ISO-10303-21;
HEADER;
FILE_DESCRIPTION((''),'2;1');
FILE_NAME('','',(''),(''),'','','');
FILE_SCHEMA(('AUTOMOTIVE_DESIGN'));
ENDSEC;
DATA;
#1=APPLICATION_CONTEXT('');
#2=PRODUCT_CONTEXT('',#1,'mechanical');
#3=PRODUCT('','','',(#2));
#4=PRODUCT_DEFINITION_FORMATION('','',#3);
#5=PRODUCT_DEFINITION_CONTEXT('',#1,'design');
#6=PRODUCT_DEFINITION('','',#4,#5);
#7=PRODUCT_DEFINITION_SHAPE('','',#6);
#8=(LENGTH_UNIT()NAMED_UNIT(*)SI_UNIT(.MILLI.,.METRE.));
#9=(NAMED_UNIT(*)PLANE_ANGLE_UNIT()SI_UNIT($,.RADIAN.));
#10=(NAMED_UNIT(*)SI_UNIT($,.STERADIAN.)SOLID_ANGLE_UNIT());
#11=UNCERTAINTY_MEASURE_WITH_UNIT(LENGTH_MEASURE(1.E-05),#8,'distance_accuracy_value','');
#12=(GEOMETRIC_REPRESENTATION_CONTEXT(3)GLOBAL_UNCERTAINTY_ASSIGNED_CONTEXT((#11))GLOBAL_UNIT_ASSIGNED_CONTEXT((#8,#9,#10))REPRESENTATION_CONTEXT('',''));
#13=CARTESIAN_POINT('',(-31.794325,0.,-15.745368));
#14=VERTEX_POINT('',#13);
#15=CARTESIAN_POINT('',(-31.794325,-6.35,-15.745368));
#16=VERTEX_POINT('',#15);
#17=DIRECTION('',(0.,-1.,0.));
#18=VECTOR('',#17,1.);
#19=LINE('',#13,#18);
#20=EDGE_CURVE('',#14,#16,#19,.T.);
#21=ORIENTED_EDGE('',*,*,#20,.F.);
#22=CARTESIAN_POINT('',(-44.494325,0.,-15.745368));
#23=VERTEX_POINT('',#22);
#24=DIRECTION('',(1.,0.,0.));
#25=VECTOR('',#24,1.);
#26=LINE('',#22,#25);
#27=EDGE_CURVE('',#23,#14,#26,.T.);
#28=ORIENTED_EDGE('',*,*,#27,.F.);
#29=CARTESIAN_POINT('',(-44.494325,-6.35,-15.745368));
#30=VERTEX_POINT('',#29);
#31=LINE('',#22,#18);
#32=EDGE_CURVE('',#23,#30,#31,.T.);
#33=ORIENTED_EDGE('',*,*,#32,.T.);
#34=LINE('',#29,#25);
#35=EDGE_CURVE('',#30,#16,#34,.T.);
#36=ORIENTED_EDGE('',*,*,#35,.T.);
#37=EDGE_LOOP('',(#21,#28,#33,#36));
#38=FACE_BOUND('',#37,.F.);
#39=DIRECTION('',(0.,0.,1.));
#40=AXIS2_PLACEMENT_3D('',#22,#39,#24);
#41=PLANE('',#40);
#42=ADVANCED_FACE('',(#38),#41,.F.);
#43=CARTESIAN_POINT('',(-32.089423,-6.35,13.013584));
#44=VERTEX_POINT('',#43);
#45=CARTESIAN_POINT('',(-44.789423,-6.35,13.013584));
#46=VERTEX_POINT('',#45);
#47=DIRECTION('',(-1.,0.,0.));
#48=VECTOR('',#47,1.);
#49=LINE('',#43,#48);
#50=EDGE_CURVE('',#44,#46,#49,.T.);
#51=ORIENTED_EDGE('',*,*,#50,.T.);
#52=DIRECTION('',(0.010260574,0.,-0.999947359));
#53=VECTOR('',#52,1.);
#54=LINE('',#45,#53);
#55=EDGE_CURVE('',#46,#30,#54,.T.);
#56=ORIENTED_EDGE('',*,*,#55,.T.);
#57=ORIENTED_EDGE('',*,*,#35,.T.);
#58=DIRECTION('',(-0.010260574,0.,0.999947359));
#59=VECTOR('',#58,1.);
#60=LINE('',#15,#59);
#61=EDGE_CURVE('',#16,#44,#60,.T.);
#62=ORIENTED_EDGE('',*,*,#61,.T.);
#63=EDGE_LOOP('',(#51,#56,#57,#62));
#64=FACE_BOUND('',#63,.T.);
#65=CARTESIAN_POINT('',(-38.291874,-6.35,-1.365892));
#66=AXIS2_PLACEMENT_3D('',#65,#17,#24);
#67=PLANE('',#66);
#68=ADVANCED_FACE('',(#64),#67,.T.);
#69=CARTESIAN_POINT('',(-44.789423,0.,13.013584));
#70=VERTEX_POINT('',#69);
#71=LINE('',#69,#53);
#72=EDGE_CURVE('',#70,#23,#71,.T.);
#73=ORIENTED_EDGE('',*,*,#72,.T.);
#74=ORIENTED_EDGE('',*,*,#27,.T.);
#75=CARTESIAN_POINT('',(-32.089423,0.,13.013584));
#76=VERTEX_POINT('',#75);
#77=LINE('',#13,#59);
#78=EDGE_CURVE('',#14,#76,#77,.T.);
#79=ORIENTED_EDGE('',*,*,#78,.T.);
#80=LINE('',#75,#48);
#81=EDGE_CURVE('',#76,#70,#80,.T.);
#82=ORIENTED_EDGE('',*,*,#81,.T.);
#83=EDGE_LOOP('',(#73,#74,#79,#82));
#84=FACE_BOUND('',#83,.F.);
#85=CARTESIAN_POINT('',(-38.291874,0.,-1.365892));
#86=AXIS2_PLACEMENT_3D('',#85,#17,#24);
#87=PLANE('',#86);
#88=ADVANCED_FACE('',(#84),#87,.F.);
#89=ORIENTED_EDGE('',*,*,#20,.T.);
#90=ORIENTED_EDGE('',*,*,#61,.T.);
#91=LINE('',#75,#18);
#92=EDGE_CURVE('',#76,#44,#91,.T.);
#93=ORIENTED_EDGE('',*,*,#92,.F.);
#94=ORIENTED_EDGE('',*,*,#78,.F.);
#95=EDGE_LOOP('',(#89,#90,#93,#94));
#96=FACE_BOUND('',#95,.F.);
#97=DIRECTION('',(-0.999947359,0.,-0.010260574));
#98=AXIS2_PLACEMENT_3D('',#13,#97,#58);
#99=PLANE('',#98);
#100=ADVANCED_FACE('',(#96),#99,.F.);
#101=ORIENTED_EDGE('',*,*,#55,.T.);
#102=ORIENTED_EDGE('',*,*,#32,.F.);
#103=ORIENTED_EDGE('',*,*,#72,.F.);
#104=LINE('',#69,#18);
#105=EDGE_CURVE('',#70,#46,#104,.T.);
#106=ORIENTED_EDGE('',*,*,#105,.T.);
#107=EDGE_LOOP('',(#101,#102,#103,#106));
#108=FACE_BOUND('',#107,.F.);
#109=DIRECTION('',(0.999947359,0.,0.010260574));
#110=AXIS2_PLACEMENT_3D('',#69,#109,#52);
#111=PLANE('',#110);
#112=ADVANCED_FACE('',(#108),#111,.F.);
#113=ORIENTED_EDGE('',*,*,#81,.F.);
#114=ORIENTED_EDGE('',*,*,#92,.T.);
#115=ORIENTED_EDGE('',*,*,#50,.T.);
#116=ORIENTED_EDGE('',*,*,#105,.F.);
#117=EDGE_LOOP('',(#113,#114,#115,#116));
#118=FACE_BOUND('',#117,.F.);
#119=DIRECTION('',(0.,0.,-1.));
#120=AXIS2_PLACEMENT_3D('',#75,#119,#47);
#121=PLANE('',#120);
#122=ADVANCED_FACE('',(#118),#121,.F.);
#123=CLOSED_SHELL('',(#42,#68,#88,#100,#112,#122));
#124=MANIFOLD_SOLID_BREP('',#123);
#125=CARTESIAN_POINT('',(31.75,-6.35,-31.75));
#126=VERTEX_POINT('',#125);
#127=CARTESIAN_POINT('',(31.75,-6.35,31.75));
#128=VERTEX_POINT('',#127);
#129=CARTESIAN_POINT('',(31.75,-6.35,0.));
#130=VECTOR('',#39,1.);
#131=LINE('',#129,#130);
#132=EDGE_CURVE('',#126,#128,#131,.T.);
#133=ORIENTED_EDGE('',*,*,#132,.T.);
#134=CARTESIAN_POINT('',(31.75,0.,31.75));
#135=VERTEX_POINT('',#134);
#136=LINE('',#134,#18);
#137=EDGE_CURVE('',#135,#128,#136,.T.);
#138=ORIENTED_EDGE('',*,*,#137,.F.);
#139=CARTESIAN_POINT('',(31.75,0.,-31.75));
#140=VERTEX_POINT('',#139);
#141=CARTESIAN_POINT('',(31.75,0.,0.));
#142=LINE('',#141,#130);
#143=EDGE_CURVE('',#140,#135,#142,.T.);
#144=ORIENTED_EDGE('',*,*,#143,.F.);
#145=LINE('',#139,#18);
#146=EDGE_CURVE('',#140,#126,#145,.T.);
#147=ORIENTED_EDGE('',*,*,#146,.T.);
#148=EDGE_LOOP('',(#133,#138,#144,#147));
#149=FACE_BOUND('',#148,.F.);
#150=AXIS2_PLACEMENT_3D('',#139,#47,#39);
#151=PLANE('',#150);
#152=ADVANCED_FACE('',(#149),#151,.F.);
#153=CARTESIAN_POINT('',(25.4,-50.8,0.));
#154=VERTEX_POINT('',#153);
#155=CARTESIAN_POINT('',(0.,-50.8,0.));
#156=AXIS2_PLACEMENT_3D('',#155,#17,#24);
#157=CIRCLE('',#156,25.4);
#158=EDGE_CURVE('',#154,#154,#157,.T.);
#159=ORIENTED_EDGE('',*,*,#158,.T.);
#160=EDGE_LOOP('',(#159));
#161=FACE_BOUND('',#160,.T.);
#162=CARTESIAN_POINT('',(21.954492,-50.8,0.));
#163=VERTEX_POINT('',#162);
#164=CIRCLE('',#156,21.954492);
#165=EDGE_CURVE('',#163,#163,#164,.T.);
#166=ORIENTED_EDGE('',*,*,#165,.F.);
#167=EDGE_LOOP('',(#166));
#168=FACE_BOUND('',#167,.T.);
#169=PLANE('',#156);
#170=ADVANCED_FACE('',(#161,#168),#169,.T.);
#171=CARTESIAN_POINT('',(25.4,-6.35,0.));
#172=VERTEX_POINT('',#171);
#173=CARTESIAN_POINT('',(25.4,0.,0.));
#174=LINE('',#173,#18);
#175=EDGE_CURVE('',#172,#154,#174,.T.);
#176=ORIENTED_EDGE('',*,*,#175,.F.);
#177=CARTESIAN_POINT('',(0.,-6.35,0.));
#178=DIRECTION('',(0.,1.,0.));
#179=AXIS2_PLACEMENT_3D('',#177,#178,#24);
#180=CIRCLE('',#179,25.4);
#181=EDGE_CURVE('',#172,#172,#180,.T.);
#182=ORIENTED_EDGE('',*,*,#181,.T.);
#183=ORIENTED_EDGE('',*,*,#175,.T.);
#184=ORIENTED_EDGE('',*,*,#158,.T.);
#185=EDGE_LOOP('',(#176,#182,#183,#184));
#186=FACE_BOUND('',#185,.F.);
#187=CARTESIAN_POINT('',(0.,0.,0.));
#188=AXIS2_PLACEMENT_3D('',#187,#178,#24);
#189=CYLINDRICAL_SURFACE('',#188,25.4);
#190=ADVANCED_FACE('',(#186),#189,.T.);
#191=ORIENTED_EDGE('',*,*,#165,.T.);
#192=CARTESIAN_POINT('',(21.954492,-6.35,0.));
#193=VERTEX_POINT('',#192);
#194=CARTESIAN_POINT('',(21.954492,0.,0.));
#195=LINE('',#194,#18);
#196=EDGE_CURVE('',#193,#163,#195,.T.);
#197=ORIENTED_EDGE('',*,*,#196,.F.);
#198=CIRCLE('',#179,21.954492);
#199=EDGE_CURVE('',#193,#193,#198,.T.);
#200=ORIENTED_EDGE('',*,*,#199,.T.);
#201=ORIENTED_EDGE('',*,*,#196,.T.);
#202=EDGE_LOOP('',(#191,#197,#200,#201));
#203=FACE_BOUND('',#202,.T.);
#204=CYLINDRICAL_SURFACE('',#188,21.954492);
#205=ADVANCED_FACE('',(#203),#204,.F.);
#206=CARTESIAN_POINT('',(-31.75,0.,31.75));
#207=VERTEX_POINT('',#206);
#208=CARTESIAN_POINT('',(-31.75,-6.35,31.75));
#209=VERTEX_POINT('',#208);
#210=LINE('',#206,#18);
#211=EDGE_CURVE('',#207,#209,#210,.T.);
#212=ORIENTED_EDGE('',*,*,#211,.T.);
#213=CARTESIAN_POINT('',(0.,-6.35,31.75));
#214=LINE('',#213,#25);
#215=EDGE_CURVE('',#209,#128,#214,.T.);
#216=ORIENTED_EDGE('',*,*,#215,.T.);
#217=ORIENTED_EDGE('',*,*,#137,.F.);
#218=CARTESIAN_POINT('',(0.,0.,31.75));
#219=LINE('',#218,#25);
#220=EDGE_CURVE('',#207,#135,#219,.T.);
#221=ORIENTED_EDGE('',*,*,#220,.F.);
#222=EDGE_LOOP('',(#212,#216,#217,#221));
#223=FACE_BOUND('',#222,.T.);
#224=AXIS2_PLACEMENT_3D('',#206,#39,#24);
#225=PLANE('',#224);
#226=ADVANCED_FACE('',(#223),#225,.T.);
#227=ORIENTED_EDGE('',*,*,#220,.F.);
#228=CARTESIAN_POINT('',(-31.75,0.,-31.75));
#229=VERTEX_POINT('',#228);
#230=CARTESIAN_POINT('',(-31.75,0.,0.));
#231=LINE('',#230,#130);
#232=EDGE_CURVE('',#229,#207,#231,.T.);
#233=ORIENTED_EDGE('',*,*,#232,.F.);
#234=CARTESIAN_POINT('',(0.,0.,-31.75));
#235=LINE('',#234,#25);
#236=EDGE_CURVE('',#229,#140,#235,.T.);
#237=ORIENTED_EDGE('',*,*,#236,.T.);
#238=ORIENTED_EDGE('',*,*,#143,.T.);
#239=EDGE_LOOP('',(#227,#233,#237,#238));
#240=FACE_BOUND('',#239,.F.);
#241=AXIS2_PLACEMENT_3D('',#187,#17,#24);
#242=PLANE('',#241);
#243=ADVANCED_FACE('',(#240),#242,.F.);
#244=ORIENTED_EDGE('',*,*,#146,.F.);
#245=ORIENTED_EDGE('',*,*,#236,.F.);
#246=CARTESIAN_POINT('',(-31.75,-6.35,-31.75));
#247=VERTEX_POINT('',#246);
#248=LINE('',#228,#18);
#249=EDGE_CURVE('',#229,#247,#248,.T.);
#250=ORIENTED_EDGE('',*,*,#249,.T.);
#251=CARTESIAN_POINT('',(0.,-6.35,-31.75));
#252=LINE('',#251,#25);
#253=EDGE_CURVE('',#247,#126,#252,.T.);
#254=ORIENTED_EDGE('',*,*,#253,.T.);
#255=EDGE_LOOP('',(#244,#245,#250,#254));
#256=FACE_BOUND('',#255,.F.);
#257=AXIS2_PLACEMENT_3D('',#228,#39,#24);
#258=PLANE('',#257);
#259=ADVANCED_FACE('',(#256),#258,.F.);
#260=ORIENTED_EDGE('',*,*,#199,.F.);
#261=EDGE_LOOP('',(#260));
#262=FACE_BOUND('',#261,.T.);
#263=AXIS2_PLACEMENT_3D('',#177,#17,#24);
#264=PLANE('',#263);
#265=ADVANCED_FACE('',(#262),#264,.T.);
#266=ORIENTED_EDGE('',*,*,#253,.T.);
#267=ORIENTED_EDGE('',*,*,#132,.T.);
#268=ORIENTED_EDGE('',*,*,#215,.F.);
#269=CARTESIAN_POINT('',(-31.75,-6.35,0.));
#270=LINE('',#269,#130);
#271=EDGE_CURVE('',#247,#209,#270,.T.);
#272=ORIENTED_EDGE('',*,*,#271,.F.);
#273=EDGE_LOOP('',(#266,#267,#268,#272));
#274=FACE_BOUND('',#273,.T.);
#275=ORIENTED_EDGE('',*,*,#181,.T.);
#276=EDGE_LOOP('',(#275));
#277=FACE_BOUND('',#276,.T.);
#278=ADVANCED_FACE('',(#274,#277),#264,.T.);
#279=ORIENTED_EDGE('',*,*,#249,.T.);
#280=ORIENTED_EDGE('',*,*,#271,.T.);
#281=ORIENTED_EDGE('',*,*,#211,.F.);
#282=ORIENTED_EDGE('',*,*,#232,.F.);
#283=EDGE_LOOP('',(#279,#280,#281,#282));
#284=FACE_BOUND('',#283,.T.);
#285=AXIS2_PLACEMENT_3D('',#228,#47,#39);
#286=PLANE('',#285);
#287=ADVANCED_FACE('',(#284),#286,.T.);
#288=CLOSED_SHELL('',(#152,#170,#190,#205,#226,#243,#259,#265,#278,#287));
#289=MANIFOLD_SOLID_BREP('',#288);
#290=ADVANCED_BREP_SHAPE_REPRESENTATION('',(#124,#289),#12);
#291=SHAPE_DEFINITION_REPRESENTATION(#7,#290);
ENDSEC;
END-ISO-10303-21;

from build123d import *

# Parameters (mm, degrees)
F0_R     = 25.4
F0_R_2   = 21.9544919018
F1_DEPTH = 50.8
F2_DEPTH = 114
F3_W     = 63.5
F3_H     = 63.5
F4_DEPTH = 6.35
F6_DEPTH = 6.35


# Not quite as in the source:
# - an extrude ends at something that could not be found from the text; its depth is read off the source's solid


with BuildPart() as f1:
    # F0 (on Front) → F1 (new body)
    with BuildSketch(Plane.XZ):
        Circle(F0_R)
        Circle(F0_R_2, mode=Mode.SUBTRACT)
    extrude(amount=F1_DEPTH)

    # F0 (on Front) → F2 (cut, through all)
    with BuildSketch(Plane.XZ):
        Circle(F0_R_2)
    extrude(amount=-F2_DEPTH, mode=Mode.SUBTRACT)

    # F3 (on Front) → F4 (join)
    with BuildSketch(Plane.XZ):
        Rectangle(F3_W, F3_H)
    extrude(amount=F4_DEPTH)


with BuildPart() as f6:
    # F5 (on Front) → F6 (new body)
    with BuildSketch(Plane.XZ):
        Polygon((-31.7943245173, -15.7453678548), (-32.0894233882, 13.013583608), (-44.7894233882, 13.013583608), (-44.4943245173, -15.7453678548), align=None)
    extrude(amount=F6_DEPTH)


solid = Compound([f1.part, f6.part])
